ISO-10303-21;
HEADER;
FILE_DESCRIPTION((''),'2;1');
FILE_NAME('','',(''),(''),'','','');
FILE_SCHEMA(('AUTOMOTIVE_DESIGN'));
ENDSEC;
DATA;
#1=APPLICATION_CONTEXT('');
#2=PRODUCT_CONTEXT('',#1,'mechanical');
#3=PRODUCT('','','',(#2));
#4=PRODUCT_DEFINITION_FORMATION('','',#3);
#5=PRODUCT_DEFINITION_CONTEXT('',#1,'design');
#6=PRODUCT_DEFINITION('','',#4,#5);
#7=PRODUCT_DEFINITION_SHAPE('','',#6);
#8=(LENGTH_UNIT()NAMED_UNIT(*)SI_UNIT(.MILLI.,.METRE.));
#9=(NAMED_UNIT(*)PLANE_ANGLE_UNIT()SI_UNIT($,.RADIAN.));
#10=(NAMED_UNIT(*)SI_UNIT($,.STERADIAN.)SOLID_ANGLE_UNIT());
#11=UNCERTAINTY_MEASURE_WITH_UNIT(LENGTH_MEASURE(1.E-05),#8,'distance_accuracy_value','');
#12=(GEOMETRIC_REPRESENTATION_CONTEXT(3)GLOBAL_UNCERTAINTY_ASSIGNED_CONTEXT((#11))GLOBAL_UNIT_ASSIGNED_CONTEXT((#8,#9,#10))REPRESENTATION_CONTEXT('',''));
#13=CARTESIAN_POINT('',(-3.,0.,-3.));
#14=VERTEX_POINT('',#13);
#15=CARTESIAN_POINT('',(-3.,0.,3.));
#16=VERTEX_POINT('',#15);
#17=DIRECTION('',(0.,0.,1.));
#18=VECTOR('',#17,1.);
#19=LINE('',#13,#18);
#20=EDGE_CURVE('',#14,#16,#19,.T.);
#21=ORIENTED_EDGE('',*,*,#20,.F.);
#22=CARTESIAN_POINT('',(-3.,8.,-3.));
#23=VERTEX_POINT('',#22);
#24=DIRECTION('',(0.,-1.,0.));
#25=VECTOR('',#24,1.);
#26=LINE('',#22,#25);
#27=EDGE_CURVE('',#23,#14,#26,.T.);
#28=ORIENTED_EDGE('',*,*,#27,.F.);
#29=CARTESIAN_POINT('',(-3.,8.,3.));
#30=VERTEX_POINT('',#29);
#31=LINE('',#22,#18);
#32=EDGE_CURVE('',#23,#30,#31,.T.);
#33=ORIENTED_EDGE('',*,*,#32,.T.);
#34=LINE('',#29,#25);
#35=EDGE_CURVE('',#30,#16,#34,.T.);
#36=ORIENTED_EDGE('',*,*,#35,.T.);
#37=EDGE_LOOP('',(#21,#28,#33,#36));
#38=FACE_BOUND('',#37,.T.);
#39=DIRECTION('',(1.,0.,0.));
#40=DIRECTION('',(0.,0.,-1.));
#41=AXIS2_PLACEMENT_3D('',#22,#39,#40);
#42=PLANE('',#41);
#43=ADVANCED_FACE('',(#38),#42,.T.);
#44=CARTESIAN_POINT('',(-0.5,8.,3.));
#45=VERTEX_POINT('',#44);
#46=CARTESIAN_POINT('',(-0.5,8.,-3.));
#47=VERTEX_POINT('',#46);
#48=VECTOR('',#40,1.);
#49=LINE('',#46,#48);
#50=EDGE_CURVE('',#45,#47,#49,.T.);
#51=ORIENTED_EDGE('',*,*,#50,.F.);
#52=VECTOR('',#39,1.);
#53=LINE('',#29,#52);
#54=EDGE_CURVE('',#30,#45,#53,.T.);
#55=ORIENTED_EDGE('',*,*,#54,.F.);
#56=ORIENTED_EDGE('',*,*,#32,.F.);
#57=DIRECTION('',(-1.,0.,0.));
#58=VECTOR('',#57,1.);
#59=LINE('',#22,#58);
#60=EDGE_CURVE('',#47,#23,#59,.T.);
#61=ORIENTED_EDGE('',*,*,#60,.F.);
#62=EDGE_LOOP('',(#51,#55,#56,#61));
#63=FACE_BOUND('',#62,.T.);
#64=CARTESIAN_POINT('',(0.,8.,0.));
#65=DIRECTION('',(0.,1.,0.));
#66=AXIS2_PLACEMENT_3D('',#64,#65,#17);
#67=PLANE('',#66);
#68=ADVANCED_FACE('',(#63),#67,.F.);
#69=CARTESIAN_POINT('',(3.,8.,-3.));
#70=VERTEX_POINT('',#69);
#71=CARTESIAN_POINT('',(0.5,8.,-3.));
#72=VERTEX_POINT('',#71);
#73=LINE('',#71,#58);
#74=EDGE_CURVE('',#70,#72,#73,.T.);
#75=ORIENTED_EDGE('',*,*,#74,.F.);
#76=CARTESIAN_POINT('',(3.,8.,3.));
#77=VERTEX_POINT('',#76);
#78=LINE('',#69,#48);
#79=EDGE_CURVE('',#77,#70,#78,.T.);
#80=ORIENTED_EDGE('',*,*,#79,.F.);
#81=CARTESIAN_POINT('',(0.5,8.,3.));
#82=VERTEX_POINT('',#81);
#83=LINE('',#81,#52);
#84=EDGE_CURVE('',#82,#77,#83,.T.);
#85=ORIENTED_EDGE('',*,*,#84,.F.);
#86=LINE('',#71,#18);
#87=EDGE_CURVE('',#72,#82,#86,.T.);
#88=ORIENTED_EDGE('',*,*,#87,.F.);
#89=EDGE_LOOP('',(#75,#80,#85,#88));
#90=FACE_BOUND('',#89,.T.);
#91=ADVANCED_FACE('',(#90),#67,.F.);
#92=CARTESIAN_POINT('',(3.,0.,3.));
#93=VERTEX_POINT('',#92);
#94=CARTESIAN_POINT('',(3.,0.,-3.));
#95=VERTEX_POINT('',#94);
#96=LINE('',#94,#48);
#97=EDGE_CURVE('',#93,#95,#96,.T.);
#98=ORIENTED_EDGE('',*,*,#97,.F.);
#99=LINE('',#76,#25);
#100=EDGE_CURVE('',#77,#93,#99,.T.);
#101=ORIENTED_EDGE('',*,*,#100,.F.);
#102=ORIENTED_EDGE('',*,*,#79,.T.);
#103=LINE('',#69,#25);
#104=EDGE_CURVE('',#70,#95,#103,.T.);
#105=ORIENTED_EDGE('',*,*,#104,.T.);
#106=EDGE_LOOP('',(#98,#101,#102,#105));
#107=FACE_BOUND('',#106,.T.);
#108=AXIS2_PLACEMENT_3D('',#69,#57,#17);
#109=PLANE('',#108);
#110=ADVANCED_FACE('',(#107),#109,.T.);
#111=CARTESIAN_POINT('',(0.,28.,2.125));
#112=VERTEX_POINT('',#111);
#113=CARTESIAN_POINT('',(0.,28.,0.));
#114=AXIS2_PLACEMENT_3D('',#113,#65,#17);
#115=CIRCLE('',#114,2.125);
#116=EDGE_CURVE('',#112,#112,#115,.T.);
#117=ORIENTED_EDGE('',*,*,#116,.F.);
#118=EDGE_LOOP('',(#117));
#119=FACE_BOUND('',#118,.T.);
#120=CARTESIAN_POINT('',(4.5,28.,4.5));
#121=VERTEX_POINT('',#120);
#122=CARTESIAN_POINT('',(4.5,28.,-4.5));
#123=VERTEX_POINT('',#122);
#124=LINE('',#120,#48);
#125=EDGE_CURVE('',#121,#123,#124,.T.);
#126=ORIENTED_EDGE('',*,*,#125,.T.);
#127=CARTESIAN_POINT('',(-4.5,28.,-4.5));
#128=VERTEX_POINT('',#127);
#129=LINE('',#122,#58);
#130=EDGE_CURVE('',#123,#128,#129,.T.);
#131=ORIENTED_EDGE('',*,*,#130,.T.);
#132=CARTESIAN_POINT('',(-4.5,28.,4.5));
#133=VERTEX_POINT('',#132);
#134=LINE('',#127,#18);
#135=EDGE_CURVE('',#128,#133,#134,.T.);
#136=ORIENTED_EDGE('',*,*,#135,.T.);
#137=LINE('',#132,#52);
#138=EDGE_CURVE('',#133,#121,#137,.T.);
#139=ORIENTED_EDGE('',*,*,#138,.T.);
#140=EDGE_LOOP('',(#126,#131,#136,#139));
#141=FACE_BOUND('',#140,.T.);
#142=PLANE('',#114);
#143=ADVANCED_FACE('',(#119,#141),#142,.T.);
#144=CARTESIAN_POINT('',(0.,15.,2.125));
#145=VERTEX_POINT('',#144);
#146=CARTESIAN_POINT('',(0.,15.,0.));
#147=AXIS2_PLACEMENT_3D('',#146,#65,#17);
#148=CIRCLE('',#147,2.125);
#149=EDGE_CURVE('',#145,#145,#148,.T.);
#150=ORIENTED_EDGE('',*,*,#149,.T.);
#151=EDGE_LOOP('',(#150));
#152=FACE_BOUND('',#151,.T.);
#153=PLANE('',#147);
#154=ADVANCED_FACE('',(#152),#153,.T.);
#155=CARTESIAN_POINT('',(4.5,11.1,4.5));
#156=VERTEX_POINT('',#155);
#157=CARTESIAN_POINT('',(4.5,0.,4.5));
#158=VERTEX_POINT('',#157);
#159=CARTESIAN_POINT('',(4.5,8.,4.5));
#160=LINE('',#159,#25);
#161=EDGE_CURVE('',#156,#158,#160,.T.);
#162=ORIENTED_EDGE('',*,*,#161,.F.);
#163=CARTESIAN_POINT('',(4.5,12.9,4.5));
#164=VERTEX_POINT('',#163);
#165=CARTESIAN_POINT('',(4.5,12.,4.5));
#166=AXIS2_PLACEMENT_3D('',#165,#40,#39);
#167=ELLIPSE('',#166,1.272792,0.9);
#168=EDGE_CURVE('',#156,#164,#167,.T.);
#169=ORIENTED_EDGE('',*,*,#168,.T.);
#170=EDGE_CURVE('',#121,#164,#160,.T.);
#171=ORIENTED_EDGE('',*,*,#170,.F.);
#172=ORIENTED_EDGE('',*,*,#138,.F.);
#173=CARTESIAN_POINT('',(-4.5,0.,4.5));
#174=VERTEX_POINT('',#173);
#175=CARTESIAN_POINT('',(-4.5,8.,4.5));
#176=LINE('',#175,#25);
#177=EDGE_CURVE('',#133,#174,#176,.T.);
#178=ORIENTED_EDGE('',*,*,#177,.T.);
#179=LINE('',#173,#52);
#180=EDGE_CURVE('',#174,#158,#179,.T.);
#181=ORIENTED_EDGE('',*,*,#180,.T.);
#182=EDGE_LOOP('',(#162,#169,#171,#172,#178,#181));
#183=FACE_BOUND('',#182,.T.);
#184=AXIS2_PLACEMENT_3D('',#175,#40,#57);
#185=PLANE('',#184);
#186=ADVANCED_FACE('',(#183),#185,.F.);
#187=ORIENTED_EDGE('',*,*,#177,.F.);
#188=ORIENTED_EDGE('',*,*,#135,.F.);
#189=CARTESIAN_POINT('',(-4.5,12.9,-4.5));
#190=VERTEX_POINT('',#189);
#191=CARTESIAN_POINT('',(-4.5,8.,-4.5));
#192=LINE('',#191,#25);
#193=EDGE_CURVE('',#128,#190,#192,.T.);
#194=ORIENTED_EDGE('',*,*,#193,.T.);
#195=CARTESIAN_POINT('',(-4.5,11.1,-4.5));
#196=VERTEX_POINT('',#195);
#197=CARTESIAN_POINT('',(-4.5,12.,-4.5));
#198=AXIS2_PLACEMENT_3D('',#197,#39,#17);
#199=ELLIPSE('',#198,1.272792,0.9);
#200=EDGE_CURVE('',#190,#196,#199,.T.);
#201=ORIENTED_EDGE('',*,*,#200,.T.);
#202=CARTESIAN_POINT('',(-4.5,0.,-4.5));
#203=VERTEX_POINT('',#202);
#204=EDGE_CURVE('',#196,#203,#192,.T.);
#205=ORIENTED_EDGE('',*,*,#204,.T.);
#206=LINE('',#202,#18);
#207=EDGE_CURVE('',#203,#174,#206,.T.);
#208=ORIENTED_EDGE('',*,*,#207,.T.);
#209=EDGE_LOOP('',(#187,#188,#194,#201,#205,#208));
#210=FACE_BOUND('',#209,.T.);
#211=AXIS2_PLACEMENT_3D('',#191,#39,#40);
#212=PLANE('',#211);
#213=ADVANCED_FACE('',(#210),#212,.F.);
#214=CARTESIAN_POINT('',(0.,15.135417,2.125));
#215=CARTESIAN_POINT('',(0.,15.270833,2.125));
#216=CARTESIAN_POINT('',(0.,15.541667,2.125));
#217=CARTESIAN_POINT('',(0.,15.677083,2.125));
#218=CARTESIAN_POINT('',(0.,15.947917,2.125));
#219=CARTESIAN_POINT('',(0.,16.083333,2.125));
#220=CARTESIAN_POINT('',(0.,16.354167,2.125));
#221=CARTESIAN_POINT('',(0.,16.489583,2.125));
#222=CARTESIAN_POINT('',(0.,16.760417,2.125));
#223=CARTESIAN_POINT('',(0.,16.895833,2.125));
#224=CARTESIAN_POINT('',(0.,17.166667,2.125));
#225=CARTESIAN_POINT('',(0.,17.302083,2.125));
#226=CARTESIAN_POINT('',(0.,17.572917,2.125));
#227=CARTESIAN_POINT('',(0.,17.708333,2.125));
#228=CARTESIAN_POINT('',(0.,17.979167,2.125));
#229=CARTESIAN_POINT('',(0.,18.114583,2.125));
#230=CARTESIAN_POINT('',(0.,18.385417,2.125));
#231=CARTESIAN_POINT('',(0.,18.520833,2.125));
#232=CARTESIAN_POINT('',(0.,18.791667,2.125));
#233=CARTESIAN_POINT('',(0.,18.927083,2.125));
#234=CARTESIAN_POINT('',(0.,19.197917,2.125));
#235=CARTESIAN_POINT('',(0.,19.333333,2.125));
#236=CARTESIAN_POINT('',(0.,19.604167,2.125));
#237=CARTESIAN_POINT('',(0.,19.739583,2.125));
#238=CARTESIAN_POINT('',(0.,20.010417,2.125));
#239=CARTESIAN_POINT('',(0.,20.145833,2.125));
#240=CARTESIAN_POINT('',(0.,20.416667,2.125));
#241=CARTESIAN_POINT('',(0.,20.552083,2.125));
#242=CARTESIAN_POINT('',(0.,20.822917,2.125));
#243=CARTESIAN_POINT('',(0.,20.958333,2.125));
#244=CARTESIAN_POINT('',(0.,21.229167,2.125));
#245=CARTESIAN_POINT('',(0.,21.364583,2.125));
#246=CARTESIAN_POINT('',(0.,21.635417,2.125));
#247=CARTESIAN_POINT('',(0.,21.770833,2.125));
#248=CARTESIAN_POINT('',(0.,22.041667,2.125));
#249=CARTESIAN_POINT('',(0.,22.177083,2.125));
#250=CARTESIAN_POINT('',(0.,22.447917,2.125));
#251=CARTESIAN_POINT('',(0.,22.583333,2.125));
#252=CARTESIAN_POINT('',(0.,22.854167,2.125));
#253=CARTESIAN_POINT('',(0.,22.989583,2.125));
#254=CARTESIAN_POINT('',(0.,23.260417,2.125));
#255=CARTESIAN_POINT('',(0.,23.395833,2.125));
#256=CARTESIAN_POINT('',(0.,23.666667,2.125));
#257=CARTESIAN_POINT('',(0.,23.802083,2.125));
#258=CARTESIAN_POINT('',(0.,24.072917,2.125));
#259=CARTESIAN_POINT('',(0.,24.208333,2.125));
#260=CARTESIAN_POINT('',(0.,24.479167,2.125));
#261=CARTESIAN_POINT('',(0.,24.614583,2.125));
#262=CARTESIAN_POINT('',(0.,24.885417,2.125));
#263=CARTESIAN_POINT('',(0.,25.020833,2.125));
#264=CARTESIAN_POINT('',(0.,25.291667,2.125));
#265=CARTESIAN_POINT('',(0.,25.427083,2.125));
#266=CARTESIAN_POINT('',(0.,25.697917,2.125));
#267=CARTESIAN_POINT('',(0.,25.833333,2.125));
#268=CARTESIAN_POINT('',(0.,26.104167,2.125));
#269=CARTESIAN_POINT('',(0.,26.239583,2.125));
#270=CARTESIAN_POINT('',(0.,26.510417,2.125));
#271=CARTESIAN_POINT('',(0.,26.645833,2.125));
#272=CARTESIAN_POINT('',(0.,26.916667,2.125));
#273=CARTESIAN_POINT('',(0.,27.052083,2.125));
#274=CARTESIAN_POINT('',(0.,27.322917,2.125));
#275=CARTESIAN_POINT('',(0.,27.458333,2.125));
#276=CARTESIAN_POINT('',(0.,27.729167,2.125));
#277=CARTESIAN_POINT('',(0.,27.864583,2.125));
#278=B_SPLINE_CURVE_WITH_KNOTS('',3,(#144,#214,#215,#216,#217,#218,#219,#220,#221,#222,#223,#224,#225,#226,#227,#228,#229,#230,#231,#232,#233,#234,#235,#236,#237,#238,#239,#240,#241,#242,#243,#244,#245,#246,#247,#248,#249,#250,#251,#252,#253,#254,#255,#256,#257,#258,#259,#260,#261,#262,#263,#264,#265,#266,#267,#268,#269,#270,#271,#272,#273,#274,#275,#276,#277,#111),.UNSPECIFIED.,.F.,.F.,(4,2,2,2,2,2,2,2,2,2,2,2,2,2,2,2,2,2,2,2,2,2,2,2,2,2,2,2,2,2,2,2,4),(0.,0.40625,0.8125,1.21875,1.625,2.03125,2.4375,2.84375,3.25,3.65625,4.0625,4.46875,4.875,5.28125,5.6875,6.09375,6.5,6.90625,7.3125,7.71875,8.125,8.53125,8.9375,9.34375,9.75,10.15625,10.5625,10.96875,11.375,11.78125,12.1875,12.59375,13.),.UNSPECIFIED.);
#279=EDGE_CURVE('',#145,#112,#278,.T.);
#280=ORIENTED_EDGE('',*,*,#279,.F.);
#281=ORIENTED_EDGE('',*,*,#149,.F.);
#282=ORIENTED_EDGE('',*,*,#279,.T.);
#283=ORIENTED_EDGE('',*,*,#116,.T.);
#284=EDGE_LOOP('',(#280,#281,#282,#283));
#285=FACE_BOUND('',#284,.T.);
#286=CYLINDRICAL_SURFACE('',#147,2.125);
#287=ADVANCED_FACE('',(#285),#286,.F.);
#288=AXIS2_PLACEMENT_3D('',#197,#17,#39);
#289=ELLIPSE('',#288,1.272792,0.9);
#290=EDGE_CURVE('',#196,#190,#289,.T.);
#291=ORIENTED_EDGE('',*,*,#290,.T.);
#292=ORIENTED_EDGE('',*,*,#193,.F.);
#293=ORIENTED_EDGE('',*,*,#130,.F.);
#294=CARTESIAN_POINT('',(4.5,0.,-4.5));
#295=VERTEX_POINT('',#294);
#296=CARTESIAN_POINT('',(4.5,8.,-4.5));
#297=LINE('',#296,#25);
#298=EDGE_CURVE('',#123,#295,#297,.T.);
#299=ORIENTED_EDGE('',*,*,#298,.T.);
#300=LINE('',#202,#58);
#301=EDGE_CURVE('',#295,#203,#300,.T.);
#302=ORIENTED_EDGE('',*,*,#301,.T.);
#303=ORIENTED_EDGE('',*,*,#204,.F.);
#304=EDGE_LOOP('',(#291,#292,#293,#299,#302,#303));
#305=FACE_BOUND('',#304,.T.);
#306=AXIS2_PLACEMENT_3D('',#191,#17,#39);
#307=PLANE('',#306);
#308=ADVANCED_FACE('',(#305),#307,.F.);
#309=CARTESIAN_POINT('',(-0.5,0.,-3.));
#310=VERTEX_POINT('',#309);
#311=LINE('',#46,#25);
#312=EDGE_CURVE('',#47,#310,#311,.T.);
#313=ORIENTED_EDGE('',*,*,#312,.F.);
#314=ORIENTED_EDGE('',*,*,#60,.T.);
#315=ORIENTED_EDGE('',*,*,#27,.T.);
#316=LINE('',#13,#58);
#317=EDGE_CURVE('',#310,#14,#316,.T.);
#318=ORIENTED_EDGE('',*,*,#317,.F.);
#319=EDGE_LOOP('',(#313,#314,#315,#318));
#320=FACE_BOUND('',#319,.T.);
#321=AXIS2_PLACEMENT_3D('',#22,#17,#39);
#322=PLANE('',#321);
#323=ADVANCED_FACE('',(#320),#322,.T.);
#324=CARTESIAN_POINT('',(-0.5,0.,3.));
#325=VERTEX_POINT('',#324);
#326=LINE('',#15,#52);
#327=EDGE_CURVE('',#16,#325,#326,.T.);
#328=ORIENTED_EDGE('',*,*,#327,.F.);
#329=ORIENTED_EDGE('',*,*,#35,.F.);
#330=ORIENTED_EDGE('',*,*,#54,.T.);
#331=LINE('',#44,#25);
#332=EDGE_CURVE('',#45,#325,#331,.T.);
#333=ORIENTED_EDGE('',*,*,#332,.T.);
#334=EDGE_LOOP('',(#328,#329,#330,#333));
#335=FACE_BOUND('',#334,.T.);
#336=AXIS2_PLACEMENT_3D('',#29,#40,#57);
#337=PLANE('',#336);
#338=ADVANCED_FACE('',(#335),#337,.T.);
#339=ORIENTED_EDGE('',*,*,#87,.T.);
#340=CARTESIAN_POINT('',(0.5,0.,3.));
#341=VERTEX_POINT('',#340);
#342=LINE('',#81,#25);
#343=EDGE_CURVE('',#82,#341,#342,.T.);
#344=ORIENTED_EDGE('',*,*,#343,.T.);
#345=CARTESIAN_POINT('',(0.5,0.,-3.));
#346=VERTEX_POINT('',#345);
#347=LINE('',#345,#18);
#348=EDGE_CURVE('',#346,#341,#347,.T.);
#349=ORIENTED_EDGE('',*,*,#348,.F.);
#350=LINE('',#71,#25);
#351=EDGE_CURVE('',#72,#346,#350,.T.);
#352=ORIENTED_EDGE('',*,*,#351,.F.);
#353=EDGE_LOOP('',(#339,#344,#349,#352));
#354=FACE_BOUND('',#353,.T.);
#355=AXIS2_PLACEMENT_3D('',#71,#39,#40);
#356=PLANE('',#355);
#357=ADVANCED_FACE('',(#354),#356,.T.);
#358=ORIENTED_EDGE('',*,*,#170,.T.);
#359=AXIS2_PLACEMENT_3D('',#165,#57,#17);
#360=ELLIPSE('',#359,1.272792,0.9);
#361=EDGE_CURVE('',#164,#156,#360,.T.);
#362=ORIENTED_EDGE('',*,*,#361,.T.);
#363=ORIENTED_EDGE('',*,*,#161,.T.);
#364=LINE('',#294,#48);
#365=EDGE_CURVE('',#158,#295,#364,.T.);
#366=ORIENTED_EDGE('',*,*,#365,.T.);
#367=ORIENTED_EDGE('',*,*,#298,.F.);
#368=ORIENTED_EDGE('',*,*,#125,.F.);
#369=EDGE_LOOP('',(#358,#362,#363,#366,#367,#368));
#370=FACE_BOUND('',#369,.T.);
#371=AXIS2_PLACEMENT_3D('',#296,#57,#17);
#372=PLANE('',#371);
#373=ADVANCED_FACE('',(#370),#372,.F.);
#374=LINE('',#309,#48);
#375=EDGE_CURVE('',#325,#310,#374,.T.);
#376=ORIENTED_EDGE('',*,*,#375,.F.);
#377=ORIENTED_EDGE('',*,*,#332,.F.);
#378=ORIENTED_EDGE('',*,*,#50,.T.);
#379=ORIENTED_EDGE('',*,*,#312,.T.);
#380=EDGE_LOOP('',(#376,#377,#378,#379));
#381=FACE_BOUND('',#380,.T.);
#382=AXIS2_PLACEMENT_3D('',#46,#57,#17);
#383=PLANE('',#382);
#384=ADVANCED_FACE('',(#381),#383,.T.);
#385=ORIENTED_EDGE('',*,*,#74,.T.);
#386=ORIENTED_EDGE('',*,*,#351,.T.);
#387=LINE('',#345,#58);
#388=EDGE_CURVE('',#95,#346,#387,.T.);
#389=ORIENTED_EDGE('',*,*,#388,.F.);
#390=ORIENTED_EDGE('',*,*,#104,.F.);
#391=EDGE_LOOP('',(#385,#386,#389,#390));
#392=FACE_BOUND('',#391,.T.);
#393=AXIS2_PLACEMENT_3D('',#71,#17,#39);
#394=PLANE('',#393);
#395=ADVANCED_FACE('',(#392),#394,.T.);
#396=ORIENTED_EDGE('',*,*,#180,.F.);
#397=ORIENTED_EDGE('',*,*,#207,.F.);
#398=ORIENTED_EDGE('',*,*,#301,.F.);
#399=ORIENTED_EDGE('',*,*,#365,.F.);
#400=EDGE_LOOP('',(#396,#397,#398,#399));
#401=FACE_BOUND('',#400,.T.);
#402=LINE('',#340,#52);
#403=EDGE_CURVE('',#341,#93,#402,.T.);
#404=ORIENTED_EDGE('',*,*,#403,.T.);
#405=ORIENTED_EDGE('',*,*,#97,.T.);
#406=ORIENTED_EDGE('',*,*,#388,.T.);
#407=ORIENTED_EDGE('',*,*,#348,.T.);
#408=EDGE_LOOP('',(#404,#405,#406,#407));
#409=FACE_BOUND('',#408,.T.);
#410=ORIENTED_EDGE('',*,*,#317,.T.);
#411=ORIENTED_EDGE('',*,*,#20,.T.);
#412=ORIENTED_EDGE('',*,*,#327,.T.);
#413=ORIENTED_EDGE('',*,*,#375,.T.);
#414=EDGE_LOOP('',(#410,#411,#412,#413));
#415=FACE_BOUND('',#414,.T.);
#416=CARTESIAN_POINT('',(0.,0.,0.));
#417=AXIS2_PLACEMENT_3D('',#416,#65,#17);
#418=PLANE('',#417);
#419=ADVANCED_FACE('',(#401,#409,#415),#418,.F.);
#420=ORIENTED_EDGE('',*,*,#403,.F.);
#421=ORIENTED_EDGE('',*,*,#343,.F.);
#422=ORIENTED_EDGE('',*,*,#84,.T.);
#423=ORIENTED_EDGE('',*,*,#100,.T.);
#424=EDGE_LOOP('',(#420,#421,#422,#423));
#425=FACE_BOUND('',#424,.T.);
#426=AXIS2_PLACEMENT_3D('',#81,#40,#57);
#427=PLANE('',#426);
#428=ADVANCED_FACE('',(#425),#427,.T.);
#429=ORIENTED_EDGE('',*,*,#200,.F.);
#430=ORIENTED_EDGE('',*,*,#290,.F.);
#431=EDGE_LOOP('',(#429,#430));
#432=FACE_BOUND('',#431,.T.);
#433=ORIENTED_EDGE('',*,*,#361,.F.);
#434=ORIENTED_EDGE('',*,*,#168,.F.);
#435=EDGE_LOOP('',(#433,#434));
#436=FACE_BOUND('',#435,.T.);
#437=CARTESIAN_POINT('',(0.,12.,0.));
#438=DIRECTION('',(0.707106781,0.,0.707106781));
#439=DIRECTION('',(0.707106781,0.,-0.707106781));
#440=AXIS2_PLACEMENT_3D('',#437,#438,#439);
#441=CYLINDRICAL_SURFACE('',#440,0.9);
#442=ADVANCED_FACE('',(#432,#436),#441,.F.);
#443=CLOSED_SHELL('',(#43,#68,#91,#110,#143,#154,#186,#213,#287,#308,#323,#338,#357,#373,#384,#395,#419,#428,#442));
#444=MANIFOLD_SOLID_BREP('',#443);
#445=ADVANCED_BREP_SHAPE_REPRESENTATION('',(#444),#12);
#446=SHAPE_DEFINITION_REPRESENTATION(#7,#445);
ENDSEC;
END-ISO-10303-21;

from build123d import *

# Parameters (mm, degrees)
SKETCH1_W              = 9
SKETCH1_H              = 9
SKETCH1_W_2            = 2.5
SKETCH1_H_2            = 6
BOSS_EXTRUDE1_DEPTH    = 8
SKETCH2_W              = 9
SKETCH2_H              = 9
BOSS_EXTRUDE2_DEPTH    = 20
SKETCH3_R              = 2.125
CUT_EXTRUDE2_DEPTH     = 13
CUT_EXTRUDE4_START     = -6.363961131
CUT_EXTRUDE4_OUTLINE_R = 0.9
CUT_EXTRUDE4_DEPTH     = 12.727922262


# Read off the part's stored shape, not the designer's step: Cut-Extrude4
with BuildPart() as part:
    # Sketch1 → Boss-Extrude1 (new body)
    with BuildSketch(Plane(origin=(0, 0, 0), x_dir=(1, 0, 0), z_dir=(0, 1, 0))):
        Rectangle(SKETCH1_W, SKETCH1_H)
        with Locations((-1.75, 0)):
            Rectangle(SKETCH1_W_2, SKETCH1_H_2, mode=Mode.SUBTRACT)
        with Locations((1.75, 0)):
            Rectangle(SKETCH1_W_2, SKETCH1_H_2, mode=Mode.SUBTRACT)
    extrude(amount=BOSS_EXTRUDE1_DEPTH)

    # Sketch2 → Boss-Extrude2 (add)
    with BuildSketch(Plane(origin=(0, 8, 0), x_dir=(1, 0, 0), z_dir=(0, 1, 0))):
        Rectangle(SKETCH2_W, SKETCH2_H)
    extrude(amount=BOSS_EXTRUDE2_DEPTH)

    # Sketch3 → Cut-Extrude2 (cut)
    with BuildSketch(Plane(origin=(0, 28, 0), x_dir=(1, 0, 0), z_dir=(0, 1, 0))):
        with Locations(Location((0, 0, 0), (0, 0, 270))):
            Circle(SKETCH3_R)
    extrude(amount=-CUT_EXTRUDE2_DEPTH, mode=Mode.SUBTRACT)

    # Cut-Extrude4 outline → Cut-Extrude4 (cut)
    with BuildSketch(Plane(origin=(0, 0, 0), x_dir=(0.707106781186548, 0, -0.707106781186547), z_dir=(0.707106781186547, 0, 0.707106781186548)).offset(CUT_EXTRUDE4_START)):
        with Locations((0, 12)):
            Circle(CUT_EXTRUDE4_OUTLINE_R)
    extrude(amount=CUT_EXTRUDE4_DEPTH, mode=Mode.SUBTRACT)


solid = part.part
